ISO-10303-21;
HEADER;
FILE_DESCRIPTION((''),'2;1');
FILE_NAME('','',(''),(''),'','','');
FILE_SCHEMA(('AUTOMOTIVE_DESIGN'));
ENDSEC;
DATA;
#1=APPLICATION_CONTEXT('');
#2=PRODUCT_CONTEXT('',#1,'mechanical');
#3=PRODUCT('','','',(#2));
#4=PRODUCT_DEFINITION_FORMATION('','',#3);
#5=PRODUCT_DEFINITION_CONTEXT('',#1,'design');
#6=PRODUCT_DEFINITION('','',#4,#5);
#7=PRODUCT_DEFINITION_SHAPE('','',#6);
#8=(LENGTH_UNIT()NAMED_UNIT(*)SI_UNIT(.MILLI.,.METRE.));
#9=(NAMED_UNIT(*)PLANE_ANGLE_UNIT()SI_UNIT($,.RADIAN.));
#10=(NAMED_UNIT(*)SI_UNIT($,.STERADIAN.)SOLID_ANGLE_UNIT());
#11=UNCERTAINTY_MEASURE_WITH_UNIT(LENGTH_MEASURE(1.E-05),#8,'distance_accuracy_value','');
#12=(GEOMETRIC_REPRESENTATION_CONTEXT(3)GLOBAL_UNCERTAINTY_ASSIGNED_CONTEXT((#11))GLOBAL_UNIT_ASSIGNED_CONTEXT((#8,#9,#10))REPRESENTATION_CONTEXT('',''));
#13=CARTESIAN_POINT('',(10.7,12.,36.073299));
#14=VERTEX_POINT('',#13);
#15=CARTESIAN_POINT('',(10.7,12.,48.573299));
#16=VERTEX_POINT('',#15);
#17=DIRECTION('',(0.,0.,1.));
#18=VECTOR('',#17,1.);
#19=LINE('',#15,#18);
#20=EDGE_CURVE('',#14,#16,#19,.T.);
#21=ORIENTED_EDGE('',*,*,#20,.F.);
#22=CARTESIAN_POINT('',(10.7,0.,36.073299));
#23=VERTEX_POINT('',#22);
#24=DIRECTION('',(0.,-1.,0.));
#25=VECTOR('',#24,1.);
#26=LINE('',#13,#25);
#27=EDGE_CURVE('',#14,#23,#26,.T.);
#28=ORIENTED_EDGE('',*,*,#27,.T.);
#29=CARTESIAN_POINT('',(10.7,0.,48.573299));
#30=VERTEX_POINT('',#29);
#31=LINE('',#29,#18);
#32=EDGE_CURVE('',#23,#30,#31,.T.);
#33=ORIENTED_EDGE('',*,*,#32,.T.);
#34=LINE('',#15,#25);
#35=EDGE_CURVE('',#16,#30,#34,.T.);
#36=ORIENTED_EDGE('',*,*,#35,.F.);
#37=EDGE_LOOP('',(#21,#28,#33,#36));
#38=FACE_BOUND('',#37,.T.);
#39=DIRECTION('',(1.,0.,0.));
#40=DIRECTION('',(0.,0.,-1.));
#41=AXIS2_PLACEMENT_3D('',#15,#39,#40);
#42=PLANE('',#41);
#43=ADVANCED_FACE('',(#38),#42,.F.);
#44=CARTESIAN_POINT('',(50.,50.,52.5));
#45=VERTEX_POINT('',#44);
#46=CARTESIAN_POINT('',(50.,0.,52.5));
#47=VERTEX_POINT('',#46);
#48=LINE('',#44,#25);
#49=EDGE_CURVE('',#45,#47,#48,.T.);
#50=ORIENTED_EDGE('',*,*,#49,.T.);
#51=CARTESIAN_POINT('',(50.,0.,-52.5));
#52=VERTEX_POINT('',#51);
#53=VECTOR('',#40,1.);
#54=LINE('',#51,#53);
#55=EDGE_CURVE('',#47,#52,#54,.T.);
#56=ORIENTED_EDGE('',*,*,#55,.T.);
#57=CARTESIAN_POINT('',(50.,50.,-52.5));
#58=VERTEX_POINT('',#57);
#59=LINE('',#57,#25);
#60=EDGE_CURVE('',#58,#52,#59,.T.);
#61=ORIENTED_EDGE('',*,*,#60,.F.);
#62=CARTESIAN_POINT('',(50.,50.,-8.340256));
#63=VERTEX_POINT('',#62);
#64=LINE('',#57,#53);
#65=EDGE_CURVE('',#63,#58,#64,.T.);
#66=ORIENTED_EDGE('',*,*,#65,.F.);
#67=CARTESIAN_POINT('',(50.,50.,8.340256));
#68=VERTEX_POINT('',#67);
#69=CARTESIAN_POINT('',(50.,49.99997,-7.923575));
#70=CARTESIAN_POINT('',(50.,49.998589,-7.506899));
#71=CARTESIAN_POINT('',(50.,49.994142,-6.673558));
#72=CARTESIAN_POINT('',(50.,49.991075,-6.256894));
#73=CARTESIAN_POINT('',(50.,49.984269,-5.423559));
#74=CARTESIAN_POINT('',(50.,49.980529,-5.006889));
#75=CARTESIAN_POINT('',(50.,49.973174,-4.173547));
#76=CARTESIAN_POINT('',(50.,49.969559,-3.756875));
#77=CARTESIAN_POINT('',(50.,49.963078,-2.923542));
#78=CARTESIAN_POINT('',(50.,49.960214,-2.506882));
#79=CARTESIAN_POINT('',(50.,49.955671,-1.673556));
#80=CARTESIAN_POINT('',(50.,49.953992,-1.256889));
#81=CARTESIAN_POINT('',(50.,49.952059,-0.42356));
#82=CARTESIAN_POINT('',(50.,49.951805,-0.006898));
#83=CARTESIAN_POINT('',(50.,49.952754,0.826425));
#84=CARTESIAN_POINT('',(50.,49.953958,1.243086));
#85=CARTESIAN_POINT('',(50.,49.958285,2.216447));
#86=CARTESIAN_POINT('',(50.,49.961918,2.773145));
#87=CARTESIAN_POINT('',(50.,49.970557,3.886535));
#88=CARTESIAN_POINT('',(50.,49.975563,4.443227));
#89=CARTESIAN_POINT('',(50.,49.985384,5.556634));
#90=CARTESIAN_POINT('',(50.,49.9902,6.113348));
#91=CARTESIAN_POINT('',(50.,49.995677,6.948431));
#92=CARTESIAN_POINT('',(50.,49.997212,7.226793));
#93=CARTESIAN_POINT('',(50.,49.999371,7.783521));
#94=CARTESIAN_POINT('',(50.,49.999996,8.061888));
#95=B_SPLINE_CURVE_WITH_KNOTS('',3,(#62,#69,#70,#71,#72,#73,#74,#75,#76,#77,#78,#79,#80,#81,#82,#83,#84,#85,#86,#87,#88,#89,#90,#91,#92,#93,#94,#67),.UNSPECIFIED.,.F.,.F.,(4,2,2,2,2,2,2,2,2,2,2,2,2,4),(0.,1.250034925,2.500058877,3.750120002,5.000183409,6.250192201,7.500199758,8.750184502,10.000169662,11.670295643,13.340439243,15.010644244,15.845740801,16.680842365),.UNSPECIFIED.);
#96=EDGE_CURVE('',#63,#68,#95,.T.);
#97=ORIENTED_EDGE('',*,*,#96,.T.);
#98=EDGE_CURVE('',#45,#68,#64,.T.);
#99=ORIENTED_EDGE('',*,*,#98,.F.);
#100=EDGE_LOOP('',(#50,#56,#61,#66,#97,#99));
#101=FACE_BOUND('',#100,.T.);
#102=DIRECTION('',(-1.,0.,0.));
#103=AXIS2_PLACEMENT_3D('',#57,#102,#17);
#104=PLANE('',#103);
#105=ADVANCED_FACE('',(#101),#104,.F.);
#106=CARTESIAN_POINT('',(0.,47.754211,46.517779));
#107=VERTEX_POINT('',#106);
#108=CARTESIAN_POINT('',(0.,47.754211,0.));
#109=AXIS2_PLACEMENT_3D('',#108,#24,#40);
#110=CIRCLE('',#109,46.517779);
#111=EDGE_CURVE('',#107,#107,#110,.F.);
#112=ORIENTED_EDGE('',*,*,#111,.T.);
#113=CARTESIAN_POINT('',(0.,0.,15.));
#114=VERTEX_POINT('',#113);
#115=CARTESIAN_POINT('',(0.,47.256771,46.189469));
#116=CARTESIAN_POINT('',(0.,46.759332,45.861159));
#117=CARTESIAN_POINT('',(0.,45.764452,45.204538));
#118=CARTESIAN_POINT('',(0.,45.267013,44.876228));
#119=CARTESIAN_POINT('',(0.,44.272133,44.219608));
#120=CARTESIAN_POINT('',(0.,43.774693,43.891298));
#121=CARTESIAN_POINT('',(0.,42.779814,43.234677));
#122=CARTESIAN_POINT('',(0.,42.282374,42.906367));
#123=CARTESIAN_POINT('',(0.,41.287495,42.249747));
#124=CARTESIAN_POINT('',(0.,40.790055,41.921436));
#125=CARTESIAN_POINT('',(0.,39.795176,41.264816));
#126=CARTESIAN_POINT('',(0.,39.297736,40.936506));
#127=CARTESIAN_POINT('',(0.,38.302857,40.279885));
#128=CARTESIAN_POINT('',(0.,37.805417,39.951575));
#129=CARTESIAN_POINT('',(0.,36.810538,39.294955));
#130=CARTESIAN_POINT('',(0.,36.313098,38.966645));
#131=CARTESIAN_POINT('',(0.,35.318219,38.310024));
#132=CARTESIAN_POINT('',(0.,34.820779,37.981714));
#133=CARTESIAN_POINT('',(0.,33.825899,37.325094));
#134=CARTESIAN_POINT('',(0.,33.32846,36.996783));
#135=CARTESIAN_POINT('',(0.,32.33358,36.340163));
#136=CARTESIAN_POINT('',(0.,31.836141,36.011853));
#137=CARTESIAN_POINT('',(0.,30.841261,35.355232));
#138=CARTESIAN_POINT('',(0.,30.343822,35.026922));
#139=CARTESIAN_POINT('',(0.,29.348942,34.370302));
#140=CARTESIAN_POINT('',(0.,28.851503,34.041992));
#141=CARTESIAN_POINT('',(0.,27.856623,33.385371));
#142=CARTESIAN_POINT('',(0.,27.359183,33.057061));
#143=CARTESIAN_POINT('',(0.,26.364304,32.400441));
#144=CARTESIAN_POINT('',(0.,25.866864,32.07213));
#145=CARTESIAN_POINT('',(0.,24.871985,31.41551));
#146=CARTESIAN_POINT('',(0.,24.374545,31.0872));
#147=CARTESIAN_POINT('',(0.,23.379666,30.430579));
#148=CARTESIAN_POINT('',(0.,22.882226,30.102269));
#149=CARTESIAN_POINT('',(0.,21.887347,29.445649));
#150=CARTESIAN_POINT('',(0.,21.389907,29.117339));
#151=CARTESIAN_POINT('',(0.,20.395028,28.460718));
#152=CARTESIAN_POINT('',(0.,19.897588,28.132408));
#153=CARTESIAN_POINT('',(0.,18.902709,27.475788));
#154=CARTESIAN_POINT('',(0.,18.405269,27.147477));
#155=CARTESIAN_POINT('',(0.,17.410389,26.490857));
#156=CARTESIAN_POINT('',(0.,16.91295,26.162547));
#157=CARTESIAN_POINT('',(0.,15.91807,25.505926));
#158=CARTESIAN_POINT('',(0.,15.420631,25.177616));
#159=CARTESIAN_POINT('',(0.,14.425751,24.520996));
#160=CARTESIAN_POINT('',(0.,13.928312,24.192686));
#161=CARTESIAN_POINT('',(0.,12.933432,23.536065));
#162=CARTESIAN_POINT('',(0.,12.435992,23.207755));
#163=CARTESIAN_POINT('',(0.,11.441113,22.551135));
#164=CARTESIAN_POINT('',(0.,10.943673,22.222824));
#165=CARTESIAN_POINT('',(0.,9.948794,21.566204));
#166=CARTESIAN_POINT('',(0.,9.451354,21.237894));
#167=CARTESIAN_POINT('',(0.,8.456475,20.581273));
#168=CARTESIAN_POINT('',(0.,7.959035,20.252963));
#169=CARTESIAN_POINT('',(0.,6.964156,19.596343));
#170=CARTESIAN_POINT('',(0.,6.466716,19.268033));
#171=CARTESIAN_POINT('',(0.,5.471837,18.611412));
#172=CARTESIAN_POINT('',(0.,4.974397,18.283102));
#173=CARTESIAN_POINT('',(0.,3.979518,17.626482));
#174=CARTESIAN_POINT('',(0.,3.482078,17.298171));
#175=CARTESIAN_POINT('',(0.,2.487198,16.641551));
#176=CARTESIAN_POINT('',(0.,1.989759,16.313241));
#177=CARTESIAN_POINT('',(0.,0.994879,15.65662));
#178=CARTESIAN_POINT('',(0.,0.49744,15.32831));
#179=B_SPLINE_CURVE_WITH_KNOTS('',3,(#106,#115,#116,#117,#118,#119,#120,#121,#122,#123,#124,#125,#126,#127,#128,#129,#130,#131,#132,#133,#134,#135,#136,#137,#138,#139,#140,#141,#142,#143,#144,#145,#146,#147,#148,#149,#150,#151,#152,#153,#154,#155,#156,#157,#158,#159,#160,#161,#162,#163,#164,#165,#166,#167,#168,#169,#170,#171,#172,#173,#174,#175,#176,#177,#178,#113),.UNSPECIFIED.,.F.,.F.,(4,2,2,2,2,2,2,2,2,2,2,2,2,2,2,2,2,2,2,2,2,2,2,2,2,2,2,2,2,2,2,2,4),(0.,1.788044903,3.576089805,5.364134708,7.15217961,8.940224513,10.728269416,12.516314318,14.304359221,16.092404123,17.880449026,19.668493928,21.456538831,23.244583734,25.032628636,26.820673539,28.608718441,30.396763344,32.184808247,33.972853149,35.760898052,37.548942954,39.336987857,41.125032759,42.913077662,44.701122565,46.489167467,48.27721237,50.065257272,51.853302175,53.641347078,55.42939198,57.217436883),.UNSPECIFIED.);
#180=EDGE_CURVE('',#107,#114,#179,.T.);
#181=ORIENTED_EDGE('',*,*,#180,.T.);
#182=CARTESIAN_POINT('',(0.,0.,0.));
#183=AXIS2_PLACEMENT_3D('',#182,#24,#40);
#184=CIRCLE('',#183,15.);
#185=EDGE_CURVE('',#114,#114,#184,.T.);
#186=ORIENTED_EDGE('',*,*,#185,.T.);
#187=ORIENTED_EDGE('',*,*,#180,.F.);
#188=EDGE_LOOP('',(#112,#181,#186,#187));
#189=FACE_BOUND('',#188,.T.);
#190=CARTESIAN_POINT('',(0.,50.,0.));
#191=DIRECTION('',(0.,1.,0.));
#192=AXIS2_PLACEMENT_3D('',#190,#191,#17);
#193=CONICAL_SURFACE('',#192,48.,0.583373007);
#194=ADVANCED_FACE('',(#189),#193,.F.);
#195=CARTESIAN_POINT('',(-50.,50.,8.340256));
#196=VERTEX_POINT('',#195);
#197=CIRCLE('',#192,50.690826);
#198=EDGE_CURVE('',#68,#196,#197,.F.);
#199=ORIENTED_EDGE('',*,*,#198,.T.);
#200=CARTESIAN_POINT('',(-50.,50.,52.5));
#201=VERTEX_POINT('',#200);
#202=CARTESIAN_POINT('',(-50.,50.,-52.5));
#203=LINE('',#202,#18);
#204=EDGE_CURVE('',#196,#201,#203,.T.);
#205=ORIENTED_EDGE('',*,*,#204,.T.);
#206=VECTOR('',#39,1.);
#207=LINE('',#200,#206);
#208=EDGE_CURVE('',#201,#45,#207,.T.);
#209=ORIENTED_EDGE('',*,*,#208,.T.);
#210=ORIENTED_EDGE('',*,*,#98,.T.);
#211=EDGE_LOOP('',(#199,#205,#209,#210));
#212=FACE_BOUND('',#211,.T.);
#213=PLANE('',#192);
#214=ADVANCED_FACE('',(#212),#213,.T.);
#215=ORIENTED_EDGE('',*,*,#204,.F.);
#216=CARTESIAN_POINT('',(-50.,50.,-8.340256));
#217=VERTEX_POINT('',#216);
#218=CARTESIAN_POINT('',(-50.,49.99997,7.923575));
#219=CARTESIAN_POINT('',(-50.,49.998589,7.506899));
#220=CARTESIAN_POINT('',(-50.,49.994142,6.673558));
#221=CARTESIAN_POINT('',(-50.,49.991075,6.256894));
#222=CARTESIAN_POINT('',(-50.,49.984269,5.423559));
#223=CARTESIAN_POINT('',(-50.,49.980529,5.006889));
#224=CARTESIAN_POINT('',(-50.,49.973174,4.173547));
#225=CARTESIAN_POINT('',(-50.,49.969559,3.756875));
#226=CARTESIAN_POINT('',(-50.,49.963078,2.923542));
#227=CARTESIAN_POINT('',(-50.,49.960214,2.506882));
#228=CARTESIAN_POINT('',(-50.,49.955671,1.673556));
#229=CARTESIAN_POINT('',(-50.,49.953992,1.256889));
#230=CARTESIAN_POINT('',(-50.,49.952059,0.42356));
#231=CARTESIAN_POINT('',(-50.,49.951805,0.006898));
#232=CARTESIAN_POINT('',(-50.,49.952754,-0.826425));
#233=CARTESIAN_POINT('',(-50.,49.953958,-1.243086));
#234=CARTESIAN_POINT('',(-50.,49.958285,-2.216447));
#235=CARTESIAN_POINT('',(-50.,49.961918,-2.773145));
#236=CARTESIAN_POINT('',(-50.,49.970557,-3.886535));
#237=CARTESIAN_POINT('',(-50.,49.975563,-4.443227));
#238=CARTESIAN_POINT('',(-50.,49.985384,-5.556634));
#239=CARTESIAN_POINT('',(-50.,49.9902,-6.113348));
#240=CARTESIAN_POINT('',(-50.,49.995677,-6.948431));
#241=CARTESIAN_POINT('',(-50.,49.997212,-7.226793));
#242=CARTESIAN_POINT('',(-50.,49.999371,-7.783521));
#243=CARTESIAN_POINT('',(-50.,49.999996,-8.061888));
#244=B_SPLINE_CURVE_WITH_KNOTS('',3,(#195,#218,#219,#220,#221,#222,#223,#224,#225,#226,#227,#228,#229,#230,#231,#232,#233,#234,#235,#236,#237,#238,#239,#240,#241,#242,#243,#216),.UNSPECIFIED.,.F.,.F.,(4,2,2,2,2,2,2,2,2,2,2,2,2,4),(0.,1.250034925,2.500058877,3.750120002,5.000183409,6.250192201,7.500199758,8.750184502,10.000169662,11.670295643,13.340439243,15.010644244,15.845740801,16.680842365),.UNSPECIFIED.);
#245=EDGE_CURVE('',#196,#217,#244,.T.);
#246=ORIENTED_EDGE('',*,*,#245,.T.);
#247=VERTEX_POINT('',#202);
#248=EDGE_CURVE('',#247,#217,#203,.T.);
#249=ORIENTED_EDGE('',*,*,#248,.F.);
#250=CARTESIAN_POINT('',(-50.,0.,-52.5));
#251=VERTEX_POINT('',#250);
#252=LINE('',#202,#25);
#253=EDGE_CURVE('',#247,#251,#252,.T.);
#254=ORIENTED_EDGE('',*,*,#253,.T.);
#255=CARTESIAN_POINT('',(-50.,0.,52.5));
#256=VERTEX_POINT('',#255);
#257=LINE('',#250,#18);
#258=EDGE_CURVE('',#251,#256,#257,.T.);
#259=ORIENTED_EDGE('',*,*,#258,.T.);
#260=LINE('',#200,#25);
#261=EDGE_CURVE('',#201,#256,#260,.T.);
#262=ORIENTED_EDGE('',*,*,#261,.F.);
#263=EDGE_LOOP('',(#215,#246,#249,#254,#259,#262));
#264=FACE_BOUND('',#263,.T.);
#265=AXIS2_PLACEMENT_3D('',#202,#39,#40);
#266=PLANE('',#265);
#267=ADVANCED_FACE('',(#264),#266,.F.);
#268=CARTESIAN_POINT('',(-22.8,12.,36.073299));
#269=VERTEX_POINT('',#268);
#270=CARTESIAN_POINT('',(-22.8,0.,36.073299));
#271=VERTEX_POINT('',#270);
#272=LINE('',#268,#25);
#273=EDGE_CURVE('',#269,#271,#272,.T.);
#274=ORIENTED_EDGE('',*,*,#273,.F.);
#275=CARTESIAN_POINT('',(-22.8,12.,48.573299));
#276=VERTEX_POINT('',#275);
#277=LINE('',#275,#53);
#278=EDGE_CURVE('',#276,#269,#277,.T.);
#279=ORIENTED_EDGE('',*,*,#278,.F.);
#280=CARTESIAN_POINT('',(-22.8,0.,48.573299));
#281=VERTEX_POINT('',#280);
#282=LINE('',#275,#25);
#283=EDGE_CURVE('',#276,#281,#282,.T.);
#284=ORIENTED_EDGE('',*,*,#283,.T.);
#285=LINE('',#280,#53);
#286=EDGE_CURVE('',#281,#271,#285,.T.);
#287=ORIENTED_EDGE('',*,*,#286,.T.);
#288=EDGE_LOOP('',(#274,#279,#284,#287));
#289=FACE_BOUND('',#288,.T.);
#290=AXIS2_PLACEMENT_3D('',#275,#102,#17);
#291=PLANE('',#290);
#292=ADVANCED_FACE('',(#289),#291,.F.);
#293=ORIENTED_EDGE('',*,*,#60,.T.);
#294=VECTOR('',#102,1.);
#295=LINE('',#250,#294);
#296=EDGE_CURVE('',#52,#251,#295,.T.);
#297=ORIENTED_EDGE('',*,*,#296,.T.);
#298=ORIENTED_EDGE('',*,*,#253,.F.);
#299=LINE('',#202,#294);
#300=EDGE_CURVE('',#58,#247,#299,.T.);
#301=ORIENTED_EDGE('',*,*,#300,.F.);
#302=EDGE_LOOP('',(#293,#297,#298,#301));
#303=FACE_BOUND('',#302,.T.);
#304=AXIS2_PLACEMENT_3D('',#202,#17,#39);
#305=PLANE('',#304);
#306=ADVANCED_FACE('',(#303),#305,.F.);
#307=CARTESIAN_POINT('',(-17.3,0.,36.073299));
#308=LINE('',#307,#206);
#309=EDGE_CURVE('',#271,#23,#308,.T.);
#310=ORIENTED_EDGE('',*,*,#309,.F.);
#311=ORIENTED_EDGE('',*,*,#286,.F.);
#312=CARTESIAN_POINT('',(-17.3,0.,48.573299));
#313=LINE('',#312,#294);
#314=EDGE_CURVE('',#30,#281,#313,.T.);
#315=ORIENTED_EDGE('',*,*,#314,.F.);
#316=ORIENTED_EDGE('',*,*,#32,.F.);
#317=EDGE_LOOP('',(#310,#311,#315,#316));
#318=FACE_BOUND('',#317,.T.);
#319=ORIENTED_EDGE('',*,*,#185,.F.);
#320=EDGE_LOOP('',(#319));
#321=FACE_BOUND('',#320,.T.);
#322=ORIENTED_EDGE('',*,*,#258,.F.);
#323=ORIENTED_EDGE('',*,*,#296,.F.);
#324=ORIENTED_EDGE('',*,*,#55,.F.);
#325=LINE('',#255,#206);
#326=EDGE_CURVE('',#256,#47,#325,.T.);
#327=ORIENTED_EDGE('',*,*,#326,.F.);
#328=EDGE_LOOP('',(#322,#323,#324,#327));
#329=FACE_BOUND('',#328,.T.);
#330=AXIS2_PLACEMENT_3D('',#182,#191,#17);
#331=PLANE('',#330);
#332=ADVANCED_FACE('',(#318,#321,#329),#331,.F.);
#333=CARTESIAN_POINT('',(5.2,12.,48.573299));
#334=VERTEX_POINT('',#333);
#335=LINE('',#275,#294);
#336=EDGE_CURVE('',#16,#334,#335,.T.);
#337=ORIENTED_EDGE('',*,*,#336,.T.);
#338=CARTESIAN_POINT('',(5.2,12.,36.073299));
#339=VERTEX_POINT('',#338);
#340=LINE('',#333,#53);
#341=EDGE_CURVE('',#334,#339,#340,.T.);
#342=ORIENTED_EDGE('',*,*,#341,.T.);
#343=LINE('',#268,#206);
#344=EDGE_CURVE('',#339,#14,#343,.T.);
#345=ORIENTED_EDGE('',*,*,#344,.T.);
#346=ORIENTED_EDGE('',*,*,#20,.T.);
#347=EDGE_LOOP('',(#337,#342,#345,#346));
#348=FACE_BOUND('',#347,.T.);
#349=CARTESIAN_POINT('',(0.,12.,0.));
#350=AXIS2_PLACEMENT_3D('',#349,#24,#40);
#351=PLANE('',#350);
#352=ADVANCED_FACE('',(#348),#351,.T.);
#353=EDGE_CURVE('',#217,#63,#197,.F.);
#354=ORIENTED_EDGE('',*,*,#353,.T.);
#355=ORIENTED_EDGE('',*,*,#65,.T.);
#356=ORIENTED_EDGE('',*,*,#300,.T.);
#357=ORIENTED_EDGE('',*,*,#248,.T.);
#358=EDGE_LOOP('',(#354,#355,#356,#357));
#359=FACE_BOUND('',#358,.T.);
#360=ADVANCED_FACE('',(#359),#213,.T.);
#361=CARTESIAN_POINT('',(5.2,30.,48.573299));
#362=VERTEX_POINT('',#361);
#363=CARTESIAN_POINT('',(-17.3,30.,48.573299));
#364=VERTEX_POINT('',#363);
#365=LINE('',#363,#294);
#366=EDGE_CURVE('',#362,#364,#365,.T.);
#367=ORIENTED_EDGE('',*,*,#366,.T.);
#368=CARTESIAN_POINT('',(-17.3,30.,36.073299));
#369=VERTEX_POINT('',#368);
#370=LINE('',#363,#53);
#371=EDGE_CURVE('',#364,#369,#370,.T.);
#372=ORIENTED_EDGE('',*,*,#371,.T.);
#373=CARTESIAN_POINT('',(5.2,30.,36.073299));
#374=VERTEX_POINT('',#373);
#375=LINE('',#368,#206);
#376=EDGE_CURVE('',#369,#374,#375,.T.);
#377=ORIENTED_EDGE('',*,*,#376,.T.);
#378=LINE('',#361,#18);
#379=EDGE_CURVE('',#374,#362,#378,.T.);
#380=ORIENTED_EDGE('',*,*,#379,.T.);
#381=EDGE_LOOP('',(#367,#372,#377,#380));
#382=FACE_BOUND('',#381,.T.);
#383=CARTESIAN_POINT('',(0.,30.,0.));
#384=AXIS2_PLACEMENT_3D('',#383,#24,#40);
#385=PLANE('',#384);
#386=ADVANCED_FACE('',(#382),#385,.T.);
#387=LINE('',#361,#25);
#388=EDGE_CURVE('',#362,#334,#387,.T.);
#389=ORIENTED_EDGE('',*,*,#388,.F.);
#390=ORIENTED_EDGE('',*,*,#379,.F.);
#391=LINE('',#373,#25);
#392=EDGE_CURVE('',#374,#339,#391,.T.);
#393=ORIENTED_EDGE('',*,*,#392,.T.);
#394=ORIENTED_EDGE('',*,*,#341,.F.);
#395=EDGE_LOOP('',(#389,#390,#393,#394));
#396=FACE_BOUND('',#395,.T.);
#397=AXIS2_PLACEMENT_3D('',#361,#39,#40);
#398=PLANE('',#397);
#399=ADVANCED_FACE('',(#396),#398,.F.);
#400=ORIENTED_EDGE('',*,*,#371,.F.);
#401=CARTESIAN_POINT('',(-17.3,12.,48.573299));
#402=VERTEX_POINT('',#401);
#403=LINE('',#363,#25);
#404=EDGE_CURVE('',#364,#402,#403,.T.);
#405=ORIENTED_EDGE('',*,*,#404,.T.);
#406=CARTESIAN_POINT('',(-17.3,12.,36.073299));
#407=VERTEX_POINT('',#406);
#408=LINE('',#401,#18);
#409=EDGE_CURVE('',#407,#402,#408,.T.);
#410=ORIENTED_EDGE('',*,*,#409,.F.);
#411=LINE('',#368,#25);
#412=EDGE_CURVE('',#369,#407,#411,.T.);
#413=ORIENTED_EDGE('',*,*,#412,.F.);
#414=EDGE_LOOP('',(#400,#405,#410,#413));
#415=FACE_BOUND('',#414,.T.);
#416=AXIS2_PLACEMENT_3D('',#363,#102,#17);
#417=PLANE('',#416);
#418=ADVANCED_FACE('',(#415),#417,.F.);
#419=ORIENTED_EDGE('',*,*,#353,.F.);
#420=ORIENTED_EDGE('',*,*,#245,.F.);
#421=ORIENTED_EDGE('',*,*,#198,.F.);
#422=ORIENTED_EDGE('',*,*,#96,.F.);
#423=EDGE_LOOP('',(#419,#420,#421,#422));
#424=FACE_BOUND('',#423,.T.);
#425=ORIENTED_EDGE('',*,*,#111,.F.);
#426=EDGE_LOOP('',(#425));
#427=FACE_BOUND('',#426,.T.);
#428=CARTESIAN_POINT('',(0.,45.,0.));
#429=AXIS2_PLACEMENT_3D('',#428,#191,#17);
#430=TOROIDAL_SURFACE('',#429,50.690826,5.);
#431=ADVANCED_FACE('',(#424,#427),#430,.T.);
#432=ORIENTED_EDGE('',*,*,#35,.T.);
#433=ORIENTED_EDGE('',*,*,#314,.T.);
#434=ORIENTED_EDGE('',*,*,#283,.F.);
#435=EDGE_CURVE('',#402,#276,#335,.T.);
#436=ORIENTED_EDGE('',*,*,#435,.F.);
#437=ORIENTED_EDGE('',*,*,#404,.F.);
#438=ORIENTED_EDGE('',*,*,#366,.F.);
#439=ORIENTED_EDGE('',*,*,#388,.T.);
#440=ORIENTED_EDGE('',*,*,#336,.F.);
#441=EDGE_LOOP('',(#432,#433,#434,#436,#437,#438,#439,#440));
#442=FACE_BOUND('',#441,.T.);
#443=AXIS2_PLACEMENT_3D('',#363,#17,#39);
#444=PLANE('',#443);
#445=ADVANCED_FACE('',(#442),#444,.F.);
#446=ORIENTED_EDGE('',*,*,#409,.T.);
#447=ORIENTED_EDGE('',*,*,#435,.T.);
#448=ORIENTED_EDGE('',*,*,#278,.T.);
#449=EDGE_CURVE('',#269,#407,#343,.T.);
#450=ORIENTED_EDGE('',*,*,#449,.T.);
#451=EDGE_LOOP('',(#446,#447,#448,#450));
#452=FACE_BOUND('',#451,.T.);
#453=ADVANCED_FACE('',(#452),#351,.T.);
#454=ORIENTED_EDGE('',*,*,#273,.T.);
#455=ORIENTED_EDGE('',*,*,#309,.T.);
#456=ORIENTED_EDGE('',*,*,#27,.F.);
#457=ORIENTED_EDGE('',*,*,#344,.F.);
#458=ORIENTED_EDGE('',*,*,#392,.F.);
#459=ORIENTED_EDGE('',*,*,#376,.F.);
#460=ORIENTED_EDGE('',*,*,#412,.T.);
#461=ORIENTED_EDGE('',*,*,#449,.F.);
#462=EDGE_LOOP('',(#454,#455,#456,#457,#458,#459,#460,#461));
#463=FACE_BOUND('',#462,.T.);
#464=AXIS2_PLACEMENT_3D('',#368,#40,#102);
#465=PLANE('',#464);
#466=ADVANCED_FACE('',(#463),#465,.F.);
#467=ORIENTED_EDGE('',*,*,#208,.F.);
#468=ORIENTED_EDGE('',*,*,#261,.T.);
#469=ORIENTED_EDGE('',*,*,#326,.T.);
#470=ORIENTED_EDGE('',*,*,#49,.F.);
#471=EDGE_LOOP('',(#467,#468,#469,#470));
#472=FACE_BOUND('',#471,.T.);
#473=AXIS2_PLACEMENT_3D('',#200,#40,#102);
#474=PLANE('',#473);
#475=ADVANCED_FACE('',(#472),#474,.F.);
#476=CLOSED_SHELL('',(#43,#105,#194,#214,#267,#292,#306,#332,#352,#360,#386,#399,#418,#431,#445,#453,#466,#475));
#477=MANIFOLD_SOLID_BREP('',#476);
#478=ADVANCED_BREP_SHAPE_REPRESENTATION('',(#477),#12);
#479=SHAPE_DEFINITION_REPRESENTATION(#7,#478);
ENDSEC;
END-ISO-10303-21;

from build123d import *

# Parameters (mm, degrees)
SKETCH1_W           = 100
SKETCH1_H           = 105
BOSS_EXTRUDE1_DEPTH = 50
FILLET1_R           = 5
SKETCH8_W           = 22.5
SKETCH8_H           = 12.5
CUT_EXTRUDE4_DEPTH  = 30
SKETCH9_W           = 33.5
SKETCH9_H           = 12.5
CUT_EXTRUDE5_DEPTH  = 12


with BuildPart() as part:
    # Sketch1 → Boss-Extrude1 (new body)
    with BuildSketch(Plane(origin=(0, 0, 0), x_dir=(1, 0, 0), z_dir=(0, 1, 0))):
        Rectangle(SKETCH1_W, SKETCH1_H)
    extrude(amount=BOSS_EXTRUDE1_DEPTH)

    # Sketch5 → Cut-Revolve1 (revolve, cut)
    with BuildSketch(Plane(origin=(0, 0, 0), x_dir=(0, 0, -1), z_dir=(1, 0, 0))):
        Polygon((-48, 50), (-15, 0), (0, 0), (0, 50), align=None)
    revolve(axis=Axis((0, -20.231136995, 0), (0, 1, 0)), mode=Mode.SUBTRACT)

    # Fillet1
    # the kernel refuses this fillet: 5 mm, written as the material it takes off along each edge
    with BuildSketch(Plane(origin=(0, 50, 0), x_dir=(0, 0, 1), z_dir=(-1, 0, 0))) as fillet1_piece_1:
        with BuildLine():
            CenterArc((48 + FILLET1_R * 0.53816526406, -FILLET1_R), FILLET1_R, 90, 56.575188817)
            Line((48 - FILLET1_R * 0.296444142502, -FILLET1_R * 0.449157791669), (48, 0))
            Line((48, 0), (48 + FILLET1_R * 0.53816526406, 0))
        make_face()
    revolve(axis=Axis((0, 50, 0), (0, 1, 0)), mode=Mode.SUBTRACT)

    # Sketch8 → Cut-Extrude4 (cut)
    with BuildSketch(Plane.XZ):
        with Locations((-6.05, 42.323299426)):
            Rectangle(SKETCH8_W, SKETCH8_H)
    extrude(amount=-CUT_EXTRUDE4_DEPTH, mode=Mode.SUBTRACT)

    # Sketch9 → Cut-Extrude5 (cut)
    with BuildSketch(Plane.XZ):
        with Locations((-6.05, 42.323299426)):
            Rectangle(SKETCH9_W, SKETCH9_H)
    extrude(amount=-CUT_EXTRUDE5_DEPTH, mode=Mode.SUBTRACT)


solid = part.part
